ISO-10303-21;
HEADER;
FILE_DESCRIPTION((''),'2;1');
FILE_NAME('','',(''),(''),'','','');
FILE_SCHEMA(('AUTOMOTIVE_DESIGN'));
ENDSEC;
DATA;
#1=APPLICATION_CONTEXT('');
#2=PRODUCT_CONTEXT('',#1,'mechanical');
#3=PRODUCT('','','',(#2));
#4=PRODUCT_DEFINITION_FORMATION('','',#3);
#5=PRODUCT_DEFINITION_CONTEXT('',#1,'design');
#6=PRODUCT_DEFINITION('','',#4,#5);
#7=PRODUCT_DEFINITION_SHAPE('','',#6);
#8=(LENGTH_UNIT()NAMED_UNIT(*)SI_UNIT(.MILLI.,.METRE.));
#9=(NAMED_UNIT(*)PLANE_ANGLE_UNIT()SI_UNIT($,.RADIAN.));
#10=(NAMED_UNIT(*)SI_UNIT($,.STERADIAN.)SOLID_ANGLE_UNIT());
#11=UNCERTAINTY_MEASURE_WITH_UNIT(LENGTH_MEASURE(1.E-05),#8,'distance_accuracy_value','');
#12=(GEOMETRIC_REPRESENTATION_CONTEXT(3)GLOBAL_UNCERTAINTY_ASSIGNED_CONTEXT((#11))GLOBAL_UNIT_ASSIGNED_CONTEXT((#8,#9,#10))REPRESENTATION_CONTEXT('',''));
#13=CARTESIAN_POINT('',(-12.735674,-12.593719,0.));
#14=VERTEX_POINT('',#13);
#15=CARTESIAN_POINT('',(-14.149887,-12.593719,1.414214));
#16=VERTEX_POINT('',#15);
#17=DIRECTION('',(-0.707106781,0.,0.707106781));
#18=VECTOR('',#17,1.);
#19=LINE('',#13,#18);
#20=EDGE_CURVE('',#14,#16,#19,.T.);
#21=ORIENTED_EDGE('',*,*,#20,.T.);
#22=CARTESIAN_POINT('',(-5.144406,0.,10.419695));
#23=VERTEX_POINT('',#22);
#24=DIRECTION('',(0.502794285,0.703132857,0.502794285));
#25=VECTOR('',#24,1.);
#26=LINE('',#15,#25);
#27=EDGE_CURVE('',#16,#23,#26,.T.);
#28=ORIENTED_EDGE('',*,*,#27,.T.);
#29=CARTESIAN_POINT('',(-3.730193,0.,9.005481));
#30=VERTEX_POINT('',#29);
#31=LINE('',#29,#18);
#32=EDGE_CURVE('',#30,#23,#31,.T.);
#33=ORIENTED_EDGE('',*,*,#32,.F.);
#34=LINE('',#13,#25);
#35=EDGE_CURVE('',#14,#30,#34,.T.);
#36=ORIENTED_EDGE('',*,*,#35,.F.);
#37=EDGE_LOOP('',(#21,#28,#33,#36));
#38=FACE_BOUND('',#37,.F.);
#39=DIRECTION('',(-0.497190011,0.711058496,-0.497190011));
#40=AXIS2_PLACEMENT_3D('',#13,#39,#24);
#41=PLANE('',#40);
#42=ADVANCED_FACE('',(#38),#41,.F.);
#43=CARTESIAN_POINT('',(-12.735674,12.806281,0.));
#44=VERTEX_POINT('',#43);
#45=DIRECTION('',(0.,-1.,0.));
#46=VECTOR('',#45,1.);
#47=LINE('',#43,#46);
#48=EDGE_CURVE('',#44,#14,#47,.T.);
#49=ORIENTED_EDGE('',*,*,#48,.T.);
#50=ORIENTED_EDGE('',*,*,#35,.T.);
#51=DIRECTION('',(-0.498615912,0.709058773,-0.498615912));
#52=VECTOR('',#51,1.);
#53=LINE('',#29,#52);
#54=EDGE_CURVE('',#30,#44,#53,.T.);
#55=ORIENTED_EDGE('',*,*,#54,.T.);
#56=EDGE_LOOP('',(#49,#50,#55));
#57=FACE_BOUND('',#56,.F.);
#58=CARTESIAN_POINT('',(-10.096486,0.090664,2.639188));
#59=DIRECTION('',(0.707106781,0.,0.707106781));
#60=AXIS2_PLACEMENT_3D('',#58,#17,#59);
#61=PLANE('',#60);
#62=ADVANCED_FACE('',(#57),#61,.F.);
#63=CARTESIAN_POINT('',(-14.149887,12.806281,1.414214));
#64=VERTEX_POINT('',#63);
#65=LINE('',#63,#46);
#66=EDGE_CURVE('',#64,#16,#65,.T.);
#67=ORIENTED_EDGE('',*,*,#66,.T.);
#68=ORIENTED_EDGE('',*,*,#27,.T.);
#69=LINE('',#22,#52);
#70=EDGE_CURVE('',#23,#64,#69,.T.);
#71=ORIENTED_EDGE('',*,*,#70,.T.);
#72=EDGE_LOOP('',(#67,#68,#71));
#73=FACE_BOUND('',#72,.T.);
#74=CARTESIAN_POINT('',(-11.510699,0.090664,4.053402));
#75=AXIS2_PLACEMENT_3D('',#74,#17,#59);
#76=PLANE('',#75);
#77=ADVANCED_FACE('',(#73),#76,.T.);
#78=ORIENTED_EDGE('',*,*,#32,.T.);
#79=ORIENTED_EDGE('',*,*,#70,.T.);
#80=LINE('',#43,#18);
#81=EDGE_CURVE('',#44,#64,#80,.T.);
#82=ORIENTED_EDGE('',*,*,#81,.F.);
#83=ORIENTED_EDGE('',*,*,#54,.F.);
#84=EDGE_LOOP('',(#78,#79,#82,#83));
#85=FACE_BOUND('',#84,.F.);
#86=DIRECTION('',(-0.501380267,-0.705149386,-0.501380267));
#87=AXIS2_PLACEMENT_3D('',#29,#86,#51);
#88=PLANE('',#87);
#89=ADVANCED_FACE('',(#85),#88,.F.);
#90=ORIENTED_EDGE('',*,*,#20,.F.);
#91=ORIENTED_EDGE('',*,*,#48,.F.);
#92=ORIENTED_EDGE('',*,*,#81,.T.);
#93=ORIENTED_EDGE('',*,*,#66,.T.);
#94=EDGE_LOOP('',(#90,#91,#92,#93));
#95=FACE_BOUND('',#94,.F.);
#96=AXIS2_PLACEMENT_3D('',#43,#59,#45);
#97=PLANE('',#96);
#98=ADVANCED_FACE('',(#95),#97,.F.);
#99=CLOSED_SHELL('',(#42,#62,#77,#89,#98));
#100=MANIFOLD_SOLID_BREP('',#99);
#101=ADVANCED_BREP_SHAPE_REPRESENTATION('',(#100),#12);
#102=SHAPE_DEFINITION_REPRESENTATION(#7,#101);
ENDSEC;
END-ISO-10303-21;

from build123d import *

# Parameters (mm, degrees)
F2_DEPTH = 2
F3_ANGLE = 45


# Not quite as in the source:
# - a feature of the source that left no trace in its solid (it failed there, or was rolled back) is left out


with BuildPart() as f2:
    # F0 (on Top) → F2 (new body)
    with BuildSketch(Plane.XY):
        Polygon((0, 0), (-12.7356738907, 12.8062811768), (-12.7356738907, -12.5937188232), align=None)
    extrude(amount=F2_DEPTH)


with BuildPart() as f2_1:
    # F3: moved
    add(f2.part.rotate(Axis((-12.7356738907, 0.1062811768, 0), (0, -1, 0)), F3_ANGLE))


solid = f2_1.part
